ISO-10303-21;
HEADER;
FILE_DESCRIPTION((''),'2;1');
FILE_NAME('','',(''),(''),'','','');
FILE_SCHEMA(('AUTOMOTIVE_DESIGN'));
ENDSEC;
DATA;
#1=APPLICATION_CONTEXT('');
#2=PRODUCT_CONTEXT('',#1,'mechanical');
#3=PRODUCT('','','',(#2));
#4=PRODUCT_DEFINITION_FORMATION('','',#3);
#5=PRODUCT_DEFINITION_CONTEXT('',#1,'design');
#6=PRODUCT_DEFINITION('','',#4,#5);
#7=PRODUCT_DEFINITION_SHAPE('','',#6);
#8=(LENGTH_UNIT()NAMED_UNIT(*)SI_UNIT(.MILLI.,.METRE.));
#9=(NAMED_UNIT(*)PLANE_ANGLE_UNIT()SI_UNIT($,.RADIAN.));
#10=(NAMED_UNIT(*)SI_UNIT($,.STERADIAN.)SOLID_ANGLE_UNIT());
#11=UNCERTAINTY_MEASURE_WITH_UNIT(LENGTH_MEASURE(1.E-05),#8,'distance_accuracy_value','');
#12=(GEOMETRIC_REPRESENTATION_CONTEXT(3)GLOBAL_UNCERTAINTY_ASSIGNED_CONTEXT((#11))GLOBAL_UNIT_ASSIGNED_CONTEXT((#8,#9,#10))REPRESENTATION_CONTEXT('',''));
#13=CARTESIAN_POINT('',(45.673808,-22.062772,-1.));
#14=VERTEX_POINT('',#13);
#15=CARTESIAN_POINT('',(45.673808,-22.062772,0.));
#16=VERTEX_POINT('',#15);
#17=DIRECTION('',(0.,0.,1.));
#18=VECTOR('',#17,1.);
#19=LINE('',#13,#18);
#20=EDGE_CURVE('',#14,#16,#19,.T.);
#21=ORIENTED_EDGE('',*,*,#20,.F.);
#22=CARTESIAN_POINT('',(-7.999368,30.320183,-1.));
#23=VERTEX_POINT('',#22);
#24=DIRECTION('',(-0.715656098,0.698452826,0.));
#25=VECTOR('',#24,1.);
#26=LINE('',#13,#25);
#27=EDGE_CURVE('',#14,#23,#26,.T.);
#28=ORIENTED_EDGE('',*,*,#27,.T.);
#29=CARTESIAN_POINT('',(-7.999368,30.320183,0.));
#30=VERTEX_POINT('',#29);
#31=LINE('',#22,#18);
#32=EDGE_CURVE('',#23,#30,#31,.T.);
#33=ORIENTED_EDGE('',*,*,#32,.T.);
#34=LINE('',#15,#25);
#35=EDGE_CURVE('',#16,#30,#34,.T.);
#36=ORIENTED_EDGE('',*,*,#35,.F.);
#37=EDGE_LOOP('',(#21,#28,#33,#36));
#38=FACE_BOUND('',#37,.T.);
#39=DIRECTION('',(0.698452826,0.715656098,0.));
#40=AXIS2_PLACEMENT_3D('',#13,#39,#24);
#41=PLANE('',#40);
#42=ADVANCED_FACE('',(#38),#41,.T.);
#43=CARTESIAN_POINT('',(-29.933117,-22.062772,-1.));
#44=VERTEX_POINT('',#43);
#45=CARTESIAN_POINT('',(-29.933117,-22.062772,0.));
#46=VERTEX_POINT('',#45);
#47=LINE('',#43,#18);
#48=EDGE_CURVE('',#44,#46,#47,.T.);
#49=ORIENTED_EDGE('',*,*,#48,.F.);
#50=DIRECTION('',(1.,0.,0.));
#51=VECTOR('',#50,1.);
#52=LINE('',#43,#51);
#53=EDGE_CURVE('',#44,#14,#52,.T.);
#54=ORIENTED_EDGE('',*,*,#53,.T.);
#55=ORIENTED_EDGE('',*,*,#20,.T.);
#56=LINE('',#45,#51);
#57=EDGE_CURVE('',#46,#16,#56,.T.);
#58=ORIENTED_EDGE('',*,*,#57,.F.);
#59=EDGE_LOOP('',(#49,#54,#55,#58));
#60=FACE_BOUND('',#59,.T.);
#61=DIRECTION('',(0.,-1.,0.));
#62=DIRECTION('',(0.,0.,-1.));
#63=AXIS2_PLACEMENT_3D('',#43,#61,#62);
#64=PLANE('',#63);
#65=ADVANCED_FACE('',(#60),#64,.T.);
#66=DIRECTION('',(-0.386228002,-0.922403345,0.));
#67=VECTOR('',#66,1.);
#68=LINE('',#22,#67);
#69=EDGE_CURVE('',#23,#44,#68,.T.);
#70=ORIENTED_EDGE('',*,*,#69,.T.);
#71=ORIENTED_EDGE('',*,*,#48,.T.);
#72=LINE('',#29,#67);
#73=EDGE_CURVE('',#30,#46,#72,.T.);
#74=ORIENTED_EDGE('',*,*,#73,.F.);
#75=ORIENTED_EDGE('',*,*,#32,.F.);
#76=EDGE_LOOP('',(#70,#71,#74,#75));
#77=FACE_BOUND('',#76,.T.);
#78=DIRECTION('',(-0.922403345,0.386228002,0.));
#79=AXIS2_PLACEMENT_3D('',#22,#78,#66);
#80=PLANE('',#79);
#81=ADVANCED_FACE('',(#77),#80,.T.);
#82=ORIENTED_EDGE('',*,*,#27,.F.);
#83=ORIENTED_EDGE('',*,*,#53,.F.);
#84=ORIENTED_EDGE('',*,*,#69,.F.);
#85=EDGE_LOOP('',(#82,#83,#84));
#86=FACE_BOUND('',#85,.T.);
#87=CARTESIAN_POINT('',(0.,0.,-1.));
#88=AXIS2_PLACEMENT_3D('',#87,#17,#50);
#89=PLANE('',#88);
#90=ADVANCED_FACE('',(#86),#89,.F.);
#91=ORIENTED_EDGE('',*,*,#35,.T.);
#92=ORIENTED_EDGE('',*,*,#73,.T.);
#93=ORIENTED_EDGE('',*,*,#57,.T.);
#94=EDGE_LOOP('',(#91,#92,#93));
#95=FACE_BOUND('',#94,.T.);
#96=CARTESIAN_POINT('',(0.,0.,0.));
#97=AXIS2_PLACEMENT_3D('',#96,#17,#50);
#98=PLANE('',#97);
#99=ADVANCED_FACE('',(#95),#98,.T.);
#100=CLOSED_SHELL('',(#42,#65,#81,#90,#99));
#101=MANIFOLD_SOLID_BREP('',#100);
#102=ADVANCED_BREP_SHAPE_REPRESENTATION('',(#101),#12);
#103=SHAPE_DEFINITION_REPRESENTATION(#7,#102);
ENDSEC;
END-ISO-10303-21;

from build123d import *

# Parameters (mm, degrees)
BASE_FLANGE1_DEPTH = 1


# Sheet-metal steps are written as plain solids
with BuildPart() as part:
    # Sketch1 → Base-Flange1 (new body)
    with BuildSketch(Plane.XY):
        Polygon((-7.999367539, 30.320183414), (-29.933117242, -22.062771761), (45.673808206, -22.062771761), align=None)
    extrude(amount=-BASE_FLANGE1_DEPTH)


solid = part.part
